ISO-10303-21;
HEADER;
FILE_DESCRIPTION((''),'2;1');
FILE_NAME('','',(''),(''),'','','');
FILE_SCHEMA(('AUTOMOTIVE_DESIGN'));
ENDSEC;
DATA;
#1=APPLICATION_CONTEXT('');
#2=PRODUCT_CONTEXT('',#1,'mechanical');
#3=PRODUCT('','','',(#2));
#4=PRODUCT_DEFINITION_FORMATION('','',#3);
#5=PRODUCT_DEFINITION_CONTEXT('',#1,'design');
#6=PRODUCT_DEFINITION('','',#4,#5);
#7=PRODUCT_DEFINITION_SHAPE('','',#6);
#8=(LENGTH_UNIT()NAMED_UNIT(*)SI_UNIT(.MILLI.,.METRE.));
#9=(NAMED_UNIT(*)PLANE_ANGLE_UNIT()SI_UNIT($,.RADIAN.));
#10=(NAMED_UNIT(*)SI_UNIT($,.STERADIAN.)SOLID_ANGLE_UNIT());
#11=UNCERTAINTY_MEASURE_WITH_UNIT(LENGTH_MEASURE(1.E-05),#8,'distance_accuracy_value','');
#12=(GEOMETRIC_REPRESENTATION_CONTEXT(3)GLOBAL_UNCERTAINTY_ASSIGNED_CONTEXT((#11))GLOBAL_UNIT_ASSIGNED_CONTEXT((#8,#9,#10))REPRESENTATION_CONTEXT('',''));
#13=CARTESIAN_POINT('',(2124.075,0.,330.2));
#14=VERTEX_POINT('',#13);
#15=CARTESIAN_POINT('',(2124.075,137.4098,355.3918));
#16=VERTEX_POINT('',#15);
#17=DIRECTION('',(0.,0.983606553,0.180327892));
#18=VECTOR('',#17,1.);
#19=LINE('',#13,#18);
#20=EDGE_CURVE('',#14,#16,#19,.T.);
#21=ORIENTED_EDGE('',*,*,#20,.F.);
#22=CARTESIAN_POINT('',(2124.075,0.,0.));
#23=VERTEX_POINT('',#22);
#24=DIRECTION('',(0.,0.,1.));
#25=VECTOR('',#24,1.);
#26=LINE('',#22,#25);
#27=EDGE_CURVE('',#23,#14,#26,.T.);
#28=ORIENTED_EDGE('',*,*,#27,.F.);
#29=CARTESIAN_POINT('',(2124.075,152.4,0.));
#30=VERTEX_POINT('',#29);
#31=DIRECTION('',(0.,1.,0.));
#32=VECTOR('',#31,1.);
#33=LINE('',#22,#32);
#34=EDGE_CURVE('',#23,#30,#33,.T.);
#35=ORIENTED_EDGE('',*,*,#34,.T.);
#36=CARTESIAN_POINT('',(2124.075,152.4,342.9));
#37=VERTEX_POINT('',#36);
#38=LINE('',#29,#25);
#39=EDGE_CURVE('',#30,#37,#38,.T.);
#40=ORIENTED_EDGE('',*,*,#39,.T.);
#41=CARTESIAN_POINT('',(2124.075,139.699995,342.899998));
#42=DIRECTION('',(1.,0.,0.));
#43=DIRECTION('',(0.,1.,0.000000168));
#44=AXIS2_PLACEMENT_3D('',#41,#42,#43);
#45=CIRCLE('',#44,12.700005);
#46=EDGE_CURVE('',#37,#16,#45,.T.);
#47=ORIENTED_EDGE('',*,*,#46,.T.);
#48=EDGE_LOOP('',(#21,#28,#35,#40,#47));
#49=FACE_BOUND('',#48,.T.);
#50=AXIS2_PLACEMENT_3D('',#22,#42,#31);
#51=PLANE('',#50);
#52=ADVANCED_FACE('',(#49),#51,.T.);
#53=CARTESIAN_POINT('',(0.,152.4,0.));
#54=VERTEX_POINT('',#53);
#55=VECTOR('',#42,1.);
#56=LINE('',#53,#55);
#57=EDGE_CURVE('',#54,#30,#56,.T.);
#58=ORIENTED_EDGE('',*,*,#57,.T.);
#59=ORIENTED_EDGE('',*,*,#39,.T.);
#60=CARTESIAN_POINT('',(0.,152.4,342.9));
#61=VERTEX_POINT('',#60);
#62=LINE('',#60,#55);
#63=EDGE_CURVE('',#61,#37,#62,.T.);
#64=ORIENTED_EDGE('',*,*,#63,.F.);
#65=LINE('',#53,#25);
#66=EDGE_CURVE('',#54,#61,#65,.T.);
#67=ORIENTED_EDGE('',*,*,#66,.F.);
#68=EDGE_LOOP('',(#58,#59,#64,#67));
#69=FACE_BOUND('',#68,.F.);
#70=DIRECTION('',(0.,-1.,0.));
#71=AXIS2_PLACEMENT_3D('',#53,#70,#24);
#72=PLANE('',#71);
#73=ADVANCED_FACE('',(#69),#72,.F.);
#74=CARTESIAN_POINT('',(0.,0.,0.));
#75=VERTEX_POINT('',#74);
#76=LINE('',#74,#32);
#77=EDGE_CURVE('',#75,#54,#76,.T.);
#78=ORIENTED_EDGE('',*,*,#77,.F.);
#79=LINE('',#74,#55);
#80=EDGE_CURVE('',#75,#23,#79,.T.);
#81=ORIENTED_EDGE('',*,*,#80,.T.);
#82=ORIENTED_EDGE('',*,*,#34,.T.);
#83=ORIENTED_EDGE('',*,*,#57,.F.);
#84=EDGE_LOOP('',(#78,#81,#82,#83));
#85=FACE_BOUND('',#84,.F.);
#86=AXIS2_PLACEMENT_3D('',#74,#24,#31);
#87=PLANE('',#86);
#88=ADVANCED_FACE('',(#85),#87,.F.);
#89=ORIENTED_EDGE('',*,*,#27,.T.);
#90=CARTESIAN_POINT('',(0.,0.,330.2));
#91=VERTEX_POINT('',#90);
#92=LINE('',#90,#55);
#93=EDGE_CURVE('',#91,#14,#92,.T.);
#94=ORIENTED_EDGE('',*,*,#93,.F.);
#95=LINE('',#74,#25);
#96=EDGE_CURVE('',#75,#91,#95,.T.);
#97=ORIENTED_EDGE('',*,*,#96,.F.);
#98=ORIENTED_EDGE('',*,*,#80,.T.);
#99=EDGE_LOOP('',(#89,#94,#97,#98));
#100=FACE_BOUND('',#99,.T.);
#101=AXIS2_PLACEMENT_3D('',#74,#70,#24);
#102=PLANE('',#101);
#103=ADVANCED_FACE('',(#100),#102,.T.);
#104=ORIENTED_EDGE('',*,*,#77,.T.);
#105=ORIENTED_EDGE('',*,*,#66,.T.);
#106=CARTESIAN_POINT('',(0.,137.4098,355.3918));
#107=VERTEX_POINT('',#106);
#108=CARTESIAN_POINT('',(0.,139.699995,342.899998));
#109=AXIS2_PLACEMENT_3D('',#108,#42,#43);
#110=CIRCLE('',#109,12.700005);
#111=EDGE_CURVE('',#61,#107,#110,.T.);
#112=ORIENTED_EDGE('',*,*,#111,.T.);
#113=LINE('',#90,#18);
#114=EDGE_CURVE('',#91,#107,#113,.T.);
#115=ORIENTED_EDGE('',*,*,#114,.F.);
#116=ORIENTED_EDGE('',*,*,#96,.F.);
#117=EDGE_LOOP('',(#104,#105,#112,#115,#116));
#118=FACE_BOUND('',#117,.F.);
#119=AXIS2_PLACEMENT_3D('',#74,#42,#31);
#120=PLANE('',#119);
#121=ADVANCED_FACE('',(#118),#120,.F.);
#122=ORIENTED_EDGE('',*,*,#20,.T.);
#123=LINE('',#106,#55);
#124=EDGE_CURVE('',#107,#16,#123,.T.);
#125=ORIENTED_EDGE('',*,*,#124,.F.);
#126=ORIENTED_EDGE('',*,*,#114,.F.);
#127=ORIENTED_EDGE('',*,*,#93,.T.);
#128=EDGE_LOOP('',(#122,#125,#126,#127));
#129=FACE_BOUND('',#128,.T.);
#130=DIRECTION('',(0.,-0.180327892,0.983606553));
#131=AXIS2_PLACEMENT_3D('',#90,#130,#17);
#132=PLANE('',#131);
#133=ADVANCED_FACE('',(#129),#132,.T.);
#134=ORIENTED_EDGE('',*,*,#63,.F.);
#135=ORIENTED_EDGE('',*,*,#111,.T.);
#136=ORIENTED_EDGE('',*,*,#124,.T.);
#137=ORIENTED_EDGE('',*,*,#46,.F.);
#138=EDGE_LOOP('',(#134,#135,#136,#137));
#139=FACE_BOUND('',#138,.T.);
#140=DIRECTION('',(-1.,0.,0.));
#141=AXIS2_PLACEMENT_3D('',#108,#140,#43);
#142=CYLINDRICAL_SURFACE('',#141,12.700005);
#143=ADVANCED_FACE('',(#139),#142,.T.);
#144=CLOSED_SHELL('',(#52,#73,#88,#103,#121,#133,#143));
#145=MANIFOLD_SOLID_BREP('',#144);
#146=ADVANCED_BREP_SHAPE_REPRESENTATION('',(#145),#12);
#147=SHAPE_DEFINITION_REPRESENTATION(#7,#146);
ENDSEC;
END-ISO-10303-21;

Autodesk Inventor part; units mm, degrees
ref_plane "YZ Plane" through (0, 0, 0) normal (1, 0, 0) x (0, 1, 0)
ref_plane "XZ Plane" through (0, 0, 0) normal (0, 1, 0) x (-1, 0, 0)
ref_plane "XY Plane" through (0, 0, 0) normal (0, 0, 1) x (1, 0, 0)
sketch "Profile" plane through (0, 0, 0) normal (0, 0, 1) x (1, 0, 0)
  line L0 (0, 0) -> (0, 330.2)
  line L1 (0, 0) -> (152.4, 0)
  line L2 (152.4, 0) -> (152.4, 342.9)
  line L3 (152.4, 342.9) -> (139.7, 342.9) construction
  line L4 (152.4, 342.9) -> (139.7, 342.9) construction
  arc A0 (152.4, 342.9) -> (137.4098, 355.3918) centre (139.7, 342.9) ccw
  line L5 (0, 330.2) -> (137.4098, 355.3918)
  dimension "d0" = 330.2
  dimension "d1" = 152.4
  dimension "d2" = 342.9
  dimension "d3" = 12.7
  dimension "d4" = 12.7
sketch "Sketch1" plane through (0, 0, 0) normal (1, 0, 0) x (0, 1, 0)
  line L0 (0, 0) -> (0, 330.2)
  line L1 (0, 0) -> (152.4, 0)
  line L2 (152.4, 0) -> (152.4, 342.9)
  line L3 (152.4, 342.9) -> (139.7, 342.9) construction
  line L4 (152.4, 342.9) -> (139.7, 342.9) construction
  arc A0 (152.4, 342.9) -> (137.4098, 355.3918) centre (139.7, 342.9) ccw
  line L5 (0, 330.2) -> (137.4098, 355.3918)
extrude "Extrusion1" add sketch "Sketch1" along normal blind 2124.075
properties part number "M" material "Granite, Cut, Polished"
